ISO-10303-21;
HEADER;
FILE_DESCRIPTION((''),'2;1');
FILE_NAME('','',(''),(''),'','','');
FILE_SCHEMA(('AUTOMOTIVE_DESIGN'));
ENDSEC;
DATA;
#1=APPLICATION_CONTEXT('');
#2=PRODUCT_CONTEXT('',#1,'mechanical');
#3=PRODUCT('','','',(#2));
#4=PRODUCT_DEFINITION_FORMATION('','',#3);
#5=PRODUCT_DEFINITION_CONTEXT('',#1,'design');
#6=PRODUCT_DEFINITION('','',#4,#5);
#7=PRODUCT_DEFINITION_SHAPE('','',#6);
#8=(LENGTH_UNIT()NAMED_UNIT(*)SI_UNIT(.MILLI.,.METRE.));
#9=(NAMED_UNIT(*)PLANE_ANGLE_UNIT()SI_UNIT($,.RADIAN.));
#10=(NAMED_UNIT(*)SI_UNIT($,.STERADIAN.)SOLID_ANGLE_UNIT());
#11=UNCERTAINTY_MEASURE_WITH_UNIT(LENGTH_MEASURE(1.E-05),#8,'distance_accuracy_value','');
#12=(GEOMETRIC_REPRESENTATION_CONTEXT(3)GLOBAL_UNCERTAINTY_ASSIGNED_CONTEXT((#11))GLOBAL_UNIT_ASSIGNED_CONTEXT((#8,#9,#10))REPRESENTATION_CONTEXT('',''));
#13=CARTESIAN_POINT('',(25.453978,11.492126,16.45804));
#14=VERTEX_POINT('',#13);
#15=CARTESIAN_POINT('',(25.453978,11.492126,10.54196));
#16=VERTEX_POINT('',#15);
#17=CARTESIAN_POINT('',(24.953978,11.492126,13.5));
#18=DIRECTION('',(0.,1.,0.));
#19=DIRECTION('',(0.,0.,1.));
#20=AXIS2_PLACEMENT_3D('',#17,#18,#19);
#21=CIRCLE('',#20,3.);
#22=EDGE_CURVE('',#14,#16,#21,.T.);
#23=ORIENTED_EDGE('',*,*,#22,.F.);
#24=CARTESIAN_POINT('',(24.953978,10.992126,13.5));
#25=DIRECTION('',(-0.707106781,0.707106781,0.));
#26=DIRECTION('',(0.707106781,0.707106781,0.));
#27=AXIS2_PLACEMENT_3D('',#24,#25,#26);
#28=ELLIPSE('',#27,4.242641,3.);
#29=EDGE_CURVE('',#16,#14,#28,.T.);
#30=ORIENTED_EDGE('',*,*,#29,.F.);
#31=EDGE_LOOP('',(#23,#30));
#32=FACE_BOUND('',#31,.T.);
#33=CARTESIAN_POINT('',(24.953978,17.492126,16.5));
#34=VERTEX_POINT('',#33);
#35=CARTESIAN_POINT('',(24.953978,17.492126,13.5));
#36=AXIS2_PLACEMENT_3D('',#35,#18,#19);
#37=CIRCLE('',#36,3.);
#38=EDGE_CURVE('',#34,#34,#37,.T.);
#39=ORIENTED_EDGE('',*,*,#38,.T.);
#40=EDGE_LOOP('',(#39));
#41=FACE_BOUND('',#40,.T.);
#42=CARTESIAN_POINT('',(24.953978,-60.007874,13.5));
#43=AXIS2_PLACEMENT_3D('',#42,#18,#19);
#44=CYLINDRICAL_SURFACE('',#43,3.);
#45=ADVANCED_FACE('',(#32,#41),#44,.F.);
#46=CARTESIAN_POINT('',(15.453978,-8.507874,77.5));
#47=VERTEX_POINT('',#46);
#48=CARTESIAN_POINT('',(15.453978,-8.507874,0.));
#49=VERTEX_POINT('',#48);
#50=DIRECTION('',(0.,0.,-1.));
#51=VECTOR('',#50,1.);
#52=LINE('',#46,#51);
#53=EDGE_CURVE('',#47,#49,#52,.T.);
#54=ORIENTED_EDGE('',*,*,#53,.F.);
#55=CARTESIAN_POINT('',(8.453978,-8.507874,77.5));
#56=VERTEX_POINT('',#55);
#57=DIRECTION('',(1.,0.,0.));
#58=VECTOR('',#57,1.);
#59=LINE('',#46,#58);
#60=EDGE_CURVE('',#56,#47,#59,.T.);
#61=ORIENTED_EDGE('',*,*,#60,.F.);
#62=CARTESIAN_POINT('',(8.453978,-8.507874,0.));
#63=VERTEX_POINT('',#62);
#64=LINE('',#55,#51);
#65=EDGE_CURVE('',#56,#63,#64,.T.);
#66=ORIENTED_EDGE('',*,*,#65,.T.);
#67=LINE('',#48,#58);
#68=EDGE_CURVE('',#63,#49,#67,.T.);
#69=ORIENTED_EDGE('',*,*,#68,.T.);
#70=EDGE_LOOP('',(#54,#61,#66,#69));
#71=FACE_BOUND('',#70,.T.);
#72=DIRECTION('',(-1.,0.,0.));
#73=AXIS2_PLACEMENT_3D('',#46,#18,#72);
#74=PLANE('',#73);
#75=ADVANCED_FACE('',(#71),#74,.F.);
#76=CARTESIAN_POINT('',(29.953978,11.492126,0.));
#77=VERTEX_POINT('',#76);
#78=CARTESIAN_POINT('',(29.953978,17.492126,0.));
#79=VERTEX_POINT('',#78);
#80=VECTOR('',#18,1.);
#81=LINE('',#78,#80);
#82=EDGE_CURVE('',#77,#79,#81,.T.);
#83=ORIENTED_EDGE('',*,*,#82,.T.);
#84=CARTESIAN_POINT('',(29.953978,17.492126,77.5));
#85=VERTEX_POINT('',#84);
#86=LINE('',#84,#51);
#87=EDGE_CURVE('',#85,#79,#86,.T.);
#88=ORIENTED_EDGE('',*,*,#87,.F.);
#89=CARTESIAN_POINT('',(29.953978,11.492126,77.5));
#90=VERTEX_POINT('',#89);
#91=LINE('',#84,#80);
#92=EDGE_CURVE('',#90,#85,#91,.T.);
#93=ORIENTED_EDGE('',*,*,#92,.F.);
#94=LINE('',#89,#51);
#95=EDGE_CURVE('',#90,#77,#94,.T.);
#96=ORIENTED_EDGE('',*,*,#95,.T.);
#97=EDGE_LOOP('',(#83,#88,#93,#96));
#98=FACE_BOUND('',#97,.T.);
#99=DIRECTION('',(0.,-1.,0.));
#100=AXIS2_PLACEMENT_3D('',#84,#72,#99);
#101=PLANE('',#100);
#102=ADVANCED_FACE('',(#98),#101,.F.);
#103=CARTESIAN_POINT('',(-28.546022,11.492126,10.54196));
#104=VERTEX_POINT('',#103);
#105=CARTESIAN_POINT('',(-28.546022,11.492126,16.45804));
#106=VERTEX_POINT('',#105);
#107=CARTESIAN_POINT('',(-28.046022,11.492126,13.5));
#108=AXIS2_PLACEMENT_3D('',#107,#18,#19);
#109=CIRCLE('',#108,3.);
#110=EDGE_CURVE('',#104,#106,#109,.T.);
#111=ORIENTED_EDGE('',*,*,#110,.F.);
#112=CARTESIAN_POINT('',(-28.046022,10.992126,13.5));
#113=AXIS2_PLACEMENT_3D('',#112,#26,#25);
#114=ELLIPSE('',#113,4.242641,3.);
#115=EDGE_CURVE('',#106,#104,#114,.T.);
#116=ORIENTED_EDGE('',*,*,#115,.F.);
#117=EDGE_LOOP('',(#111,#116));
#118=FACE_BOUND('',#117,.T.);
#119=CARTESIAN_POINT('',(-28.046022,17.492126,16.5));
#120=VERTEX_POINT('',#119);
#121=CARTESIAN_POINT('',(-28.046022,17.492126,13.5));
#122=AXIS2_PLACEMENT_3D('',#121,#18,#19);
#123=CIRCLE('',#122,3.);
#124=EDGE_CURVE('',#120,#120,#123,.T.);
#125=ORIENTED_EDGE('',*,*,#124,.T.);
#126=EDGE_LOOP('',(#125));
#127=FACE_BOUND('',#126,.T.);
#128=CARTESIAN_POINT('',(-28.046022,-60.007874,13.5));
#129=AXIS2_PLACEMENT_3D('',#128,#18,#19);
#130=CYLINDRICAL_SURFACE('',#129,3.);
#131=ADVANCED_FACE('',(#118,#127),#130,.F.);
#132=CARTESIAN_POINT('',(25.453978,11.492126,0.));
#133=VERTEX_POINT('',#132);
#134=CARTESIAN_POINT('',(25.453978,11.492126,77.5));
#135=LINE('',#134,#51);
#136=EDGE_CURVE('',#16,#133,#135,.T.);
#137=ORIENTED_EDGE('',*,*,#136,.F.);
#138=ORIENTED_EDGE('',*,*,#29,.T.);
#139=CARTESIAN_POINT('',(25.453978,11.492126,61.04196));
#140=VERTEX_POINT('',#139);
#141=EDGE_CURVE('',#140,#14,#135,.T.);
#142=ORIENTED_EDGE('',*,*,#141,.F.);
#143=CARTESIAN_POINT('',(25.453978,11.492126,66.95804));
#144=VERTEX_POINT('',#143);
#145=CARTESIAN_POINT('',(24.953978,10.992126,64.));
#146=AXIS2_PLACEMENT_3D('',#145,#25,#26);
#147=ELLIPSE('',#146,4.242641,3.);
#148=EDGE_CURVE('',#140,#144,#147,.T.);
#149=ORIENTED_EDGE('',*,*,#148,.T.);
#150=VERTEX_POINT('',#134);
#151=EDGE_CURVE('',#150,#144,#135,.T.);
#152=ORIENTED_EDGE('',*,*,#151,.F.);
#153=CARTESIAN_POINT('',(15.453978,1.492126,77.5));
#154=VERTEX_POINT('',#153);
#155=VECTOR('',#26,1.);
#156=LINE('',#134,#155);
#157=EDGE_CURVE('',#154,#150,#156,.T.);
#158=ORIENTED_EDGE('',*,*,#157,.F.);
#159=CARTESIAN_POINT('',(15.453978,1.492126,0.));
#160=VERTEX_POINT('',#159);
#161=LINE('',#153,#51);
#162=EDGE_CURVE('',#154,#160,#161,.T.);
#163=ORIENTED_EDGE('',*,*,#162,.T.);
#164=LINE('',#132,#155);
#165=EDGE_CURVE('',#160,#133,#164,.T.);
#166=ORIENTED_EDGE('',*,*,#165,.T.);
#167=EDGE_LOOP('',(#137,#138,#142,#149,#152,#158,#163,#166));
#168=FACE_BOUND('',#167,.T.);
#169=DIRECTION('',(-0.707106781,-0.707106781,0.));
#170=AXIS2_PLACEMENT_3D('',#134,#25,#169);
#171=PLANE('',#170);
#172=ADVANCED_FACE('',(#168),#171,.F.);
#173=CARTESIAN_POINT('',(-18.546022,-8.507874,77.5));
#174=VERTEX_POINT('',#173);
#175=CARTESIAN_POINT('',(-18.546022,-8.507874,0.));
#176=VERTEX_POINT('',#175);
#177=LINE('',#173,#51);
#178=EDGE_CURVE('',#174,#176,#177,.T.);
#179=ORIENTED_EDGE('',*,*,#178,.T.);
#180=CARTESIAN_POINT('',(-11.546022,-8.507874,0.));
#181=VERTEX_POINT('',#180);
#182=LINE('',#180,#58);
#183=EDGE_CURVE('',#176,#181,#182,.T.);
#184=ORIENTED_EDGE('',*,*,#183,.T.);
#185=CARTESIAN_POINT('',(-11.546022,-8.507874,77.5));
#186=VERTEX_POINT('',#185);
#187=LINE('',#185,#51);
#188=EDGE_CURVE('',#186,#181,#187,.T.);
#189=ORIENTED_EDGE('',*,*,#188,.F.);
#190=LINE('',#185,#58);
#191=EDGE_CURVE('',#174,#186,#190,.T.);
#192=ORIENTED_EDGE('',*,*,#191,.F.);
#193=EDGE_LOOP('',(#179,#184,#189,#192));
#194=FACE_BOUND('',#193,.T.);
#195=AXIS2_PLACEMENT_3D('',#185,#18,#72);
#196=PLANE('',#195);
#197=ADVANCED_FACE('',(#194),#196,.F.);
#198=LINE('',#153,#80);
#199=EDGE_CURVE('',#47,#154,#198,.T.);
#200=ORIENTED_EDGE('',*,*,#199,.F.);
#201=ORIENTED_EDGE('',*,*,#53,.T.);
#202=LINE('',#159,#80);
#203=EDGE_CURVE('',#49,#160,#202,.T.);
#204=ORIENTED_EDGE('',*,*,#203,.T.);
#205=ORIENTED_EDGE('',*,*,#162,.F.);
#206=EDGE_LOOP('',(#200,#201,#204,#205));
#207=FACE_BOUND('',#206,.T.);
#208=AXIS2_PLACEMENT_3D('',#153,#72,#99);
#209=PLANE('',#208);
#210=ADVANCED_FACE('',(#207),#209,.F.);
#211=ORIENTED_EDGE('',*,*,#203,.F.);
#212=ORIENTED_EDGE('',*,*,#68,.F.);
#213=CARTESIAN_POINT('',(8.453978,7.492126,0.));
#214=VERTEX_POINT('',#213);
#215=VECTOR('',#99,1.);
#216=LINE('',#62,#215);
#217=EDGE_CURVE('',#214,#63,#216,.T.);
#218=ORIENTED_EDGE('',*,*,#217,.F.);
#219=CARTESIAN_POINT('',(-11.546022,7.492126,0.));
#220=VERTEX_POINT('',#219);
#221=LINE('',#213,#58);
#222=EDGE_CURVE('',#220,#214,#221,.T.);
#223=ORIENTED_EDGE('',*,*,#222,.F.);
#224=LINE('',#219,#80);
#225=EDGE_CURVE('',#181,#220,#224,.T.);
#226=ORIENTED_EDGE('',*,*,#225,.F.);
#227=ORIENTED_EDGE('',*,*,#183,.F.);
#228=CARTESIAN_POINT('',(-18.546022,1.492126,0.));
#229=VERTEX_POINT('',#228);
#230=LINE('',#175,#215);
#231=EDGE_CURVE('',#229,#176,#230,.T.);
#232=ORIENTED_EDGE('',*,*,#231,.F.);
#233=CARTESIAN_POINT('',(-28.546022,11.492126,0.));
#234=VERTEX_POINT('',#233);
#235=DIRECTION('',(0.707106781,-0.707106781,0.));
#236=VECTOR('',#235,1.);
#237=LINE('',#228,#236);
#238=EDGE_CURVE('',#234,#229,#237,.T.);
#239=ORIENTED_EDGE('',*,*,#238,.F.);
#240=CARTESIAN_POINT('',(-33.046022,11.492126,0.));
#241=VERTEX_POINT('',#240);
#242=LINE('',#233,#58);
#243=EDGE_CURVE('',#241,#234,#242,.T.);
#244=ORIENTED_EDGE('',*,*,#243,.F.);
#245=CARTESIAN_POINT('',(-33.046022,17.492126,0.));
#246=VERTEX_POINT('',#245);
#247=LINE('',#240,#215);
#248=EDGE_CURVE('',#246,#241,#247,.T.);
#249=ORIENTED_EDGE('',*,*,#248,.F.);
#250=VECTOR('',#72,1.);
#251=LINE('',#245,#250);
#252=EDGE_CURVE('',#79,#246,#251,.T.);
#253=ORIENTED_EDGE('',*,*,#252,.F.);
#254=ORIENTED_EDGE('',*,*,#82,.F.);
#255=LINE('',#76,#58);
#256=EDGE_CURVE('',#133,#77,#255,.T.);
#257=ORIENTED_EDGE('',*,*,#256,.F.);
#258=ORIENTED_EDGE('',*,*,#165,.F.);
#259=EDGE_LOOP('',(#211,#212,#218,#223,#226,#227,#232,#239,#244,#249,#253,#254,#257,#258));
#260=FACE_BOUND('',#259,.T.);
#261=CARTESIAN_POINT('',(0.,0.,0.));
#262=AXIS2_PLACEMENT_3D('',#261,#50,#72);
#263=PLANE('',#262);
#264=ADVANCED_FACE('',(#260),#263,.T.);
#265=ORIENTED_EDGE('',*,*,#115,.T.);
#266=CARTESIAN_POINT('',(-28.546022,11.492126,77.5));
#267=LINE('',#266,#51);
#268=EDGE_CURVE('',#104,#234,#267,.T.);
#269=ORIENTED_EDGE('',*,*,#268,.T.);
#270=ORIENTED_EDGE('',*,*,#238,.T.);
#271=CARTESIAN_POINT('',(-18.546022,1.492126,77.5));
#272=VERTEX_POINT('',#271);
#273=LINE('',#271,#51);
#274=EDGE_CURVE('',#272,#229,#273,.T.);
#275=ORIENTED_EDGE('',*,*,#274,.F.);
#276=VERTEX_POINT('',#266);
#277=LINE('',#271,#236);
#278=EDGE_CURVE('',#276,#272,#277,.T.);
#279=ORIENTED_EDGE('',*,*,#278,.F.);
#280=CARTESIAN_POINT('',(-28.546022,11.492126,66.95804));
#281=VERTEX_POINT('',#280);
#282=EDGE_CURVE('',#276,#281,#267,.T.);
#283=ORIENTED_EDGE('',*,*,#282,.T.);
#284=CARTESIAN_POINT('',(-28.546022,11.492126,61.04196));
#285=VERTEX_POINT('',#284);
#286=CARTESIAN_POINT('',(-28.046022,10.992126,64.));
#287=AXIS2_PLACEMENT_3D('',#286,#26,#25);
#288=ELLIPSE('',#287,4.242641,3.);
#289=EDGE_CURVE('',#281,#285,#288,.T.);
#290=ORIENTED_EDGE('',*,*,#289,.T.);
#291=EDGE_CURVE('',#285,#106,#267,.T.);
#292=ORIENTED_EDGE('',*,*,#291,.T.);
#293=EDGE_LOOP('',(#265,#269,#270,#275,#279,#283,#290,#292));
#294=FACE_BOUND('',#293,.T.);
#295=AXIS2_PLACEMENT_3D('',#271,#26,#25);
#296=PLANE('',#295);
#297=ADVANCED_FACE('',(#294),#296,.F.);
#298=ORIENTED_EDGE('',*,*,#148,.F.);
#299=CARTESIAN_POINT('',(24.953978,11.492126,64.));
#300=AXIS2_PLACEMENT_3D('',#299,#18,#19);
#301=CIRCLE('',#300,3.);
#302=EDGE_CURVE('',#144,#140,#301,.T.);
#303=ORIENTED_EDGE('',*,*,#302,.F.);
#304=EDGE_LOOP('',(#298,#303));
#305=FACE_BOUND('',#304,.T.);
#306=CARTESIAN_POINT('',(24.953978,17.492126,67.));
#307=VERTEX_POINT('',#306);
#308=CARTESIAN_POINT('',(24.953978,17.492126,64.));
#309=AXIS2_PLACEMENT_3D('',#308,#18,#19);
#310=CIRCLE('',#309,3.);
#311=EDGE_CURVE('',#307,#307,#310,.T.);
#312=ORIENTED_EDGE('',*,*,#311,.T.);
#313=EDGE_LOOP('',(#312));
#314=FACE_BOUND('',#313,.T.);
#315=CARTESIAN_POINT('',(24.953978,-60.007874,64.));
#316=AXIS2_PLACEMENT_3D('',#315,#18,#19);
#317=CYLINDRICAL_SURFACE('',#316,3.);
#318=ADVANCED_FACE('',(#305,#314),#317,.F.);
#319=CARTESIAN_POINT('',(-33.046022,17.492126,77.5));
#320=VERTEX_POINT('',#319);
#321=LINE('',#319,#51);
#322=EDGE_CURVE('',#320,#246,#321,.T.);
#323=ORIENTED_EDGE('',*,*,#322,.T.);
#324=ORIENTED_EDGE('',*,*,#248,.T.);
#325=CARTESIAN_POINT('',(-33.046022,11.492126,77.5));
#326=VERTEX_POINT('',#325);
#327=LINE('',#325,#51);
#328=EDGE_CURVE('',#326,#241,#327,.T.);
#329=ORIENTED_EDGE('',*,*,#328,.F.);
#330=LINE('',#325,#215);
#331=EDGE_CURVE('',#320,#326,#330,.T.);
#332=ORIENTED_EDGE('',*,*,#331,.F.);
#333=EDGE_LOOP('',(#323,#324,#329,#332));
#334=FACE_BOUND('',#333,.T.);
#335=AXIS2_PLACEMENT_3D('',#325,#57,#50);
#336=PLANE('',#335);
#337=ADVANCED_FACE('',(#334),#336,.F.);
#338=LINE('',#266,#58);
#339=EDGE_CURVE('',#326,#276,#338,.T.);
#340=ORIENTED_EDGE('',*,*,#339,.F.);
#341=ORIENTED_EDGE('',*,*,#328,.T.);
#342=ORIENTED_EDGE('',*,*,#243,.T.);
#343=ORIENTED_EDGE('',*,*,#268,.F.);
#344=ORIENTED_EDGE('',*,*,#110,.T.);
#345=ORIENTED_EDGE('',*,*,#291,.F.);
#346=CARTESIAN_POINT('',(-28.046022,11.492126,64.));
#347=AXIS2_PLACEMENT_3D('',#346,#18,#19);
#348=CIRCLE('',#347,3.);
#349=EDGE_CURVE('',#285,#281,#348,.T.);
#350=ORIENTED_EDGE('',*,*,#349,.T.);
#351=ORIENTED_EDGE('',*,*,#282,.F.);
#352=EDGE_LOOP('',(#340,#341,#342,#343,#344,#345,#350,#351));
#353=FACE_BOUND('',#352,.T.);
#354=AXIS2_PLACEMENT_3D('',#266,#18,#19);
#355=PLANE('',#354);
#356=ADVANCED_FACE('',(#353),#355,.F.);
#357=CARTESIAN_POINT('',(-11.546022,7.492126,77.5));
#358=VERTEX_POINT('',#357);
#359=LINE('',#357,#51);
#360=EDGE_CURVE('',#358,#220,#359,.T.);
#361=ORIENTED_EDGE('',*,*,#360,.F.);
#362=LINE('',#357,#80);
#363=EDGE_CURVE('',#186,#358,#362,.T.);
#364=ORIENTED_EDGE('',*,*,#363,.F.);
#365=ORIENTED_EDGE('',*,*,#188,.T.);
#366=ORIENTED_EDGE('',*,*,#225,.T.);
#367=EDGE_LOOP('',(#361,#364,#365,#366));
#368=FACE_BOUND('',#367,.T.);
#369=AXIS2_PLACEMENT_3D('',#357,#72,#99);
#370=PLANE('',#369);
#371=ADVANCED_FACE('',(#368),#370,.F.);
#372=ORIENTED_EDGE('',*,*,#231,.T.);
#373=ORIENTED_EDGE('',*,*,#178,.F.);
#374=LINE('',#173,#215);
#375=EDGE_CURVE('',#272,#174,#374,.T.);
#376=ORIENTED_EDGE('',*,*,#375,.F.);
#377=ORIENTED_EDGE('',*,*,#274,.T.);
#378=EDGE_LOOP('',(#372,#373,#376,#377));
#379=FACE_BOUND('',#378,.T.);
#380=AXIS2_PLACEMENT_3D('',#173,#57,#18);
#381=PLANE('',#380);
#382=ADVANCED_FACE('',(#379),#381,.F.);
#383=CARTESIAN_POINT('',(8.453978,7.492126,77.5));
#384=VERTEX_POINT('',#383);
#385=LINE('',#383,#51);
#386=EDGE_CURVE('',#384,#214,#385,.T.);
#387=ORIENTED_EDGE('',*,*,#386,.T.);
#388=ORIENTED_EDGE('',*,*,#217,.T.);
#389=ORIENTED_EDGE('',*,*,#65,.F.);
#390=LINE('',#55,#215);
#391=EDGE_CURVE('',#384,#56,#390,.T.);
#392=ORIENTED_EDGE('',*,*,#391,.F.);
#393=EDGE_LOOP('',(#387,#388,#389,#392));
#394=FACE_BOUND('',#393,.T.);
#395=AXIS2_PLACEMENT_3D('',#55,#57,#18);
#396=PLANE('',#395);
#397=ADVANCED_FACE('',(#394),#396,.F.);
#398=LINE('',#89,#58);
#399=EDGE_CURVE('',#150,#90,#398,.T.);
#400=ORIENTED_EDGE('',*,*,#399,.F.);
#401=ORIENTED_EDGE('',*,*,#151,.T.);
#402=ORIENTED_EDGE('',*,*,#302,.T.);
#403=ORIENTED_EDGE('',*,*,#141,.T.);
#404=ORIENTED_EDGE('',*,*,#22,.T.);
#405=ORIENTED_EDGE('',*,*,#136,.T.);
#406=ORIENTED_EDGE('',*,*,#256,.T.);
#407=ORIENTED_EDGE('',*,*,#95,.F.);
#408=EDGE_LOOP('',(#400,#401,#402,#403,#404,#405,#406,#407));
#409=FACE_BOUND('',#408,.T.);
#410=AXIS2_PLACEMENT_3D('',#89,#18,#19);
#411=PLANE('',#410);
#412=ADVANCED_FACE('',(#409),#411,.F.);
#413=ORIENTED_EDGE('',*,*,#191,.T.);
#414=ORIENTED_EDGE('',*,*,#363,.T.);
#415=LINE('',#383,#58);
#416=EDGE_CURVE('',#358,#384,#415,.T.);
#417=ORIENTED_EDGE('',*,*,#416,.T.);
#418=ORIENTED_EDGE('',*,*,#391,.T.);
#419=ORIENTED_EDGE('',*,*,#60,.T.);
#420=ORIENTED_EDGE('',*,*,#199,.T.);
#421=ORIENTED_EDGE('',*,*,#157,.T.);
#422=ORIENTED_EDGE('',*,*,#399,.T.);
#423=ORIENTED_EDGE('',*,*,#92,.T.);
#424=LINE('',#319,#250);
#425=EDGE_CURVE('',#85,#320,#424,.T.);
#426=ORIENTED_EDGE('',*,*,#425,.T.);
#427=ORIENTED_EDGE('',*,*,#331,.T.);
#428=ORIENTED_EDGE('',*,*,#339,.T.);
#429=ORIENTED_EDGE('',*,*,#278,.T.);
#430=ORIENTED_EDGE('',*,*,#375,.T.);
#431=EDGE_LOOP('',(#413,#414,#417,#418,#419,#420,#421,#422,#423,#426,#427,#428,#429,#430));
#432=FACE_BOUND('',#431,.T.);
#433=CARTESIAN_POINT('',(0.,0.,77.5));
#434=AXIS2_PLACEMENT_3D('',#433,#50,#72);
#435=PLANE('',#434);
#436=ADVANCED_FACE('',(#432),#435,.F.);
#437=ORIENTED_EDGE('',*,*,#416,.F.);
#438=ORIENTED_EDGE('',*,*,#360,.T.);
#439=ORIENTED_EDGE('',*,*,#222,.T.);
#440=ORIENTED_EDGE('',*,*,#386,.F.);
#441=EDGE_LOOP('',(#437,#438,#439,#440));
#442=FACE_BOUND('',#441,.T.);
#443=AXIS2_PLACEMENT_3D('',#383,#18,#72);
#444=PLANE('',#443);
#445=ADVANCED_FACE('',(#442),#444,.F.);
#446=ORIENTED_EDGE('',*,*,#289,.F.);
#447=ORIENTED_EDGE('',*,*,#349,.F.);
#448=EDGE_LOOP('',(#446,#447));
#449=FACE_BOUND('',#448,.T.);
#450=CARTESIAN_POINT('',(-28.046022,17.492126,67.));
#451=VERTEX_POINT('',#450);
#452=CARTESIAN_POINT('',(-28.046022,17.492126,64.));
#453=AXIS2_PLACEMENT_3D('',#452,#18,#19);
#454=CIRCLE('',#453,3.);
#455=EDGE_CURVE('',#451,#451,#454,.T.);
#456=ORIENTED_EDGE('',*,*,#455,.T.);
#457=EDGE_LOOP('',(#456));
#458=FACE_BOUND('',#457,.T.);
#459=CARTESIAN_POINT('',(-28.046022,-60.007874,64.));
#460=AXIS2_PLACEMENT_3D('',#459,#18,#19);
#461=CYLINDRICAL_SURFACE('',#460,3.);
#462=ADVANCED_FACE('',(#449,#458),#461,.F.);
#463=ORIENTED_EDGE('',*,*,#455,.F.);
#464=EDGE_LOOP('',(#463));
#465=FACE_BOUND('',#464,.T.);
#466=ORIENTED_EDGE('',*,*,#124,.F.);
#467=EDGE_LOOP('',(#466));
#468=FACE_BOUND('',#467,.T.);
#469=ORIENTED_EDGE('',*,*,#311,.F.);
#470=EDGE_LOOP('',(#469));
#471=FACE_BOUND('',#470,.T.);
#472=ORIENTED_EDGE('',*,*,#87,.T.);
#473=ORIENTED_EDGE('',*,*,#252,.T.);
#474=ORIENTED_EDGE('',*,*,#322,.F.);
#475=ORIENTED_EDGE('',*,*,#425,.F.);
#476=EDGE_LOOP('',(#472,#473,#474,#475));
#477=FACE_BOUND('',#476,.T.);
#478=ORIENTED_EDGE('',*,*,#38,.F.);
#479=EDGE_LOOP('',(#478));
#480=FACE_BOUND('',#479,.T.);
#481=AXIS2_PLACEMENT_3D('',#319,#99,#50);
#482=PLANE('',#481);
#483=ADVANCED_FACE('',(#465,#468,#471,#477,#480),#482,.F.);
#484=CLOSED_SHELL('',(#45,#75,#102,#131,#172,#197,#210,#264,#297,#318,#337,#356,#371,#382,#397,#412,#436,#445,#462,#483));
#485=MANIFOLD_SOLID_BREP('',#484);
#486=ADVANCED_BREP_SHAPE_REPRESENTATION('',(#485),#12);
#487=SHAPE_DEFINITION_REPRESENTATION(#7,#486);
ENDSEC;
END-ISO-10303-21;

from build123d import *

# Parameters (mm, degrees)
Y_KSEKLIK_EKSTR_ZYON1_DEPTH = 77.5
KES_EKSTR_ZYON1_START       = 7.992125884
KES_EKSTR_ZYON1_OUTLINE_R   = 3
KES_EKSTR_ZYON1_DEPTH       = 9.5000001


# Read off the part's stored shape, not the designer's step: Kes-Ekstrüzyon1
with BuildPart() as part:
    # Çizim1 → Yükseklik-Ekstrüzyon1 (new body)
    with BuildSketch(Plane.XY):
        Polygon((-33.046021585, 17.492125984), (29.953978415, 17.492125984), (29.953978415, 11.492125984), (25.453978415, 11.492125984), (15.453978415, 1.492125984), (15.453978415, -8.507874016), (8.453978415, -8.507874016), (8.453978415, 7.492125984), (-11.546021585, 7.492125984), (-11.546021585, -8.507874016), (-18.546021585, -8.507874016), (-18.546021585, 1.492125984), (-28.546021585, 11.492125984), (-33.046021585, 11.492125984), align=None)
    extrude(amount=Y_KSEKLIK_EKSTR_ZYON1_DEPTH)

    # Kes-Ekstrüzyon1 outline → Kes-Ekstrüzyon1 (cut)
    with BuildSketch(Plane(origin=(0, 0, 0), x_dir=(1, 0, 0), z_dir=(0, 1, 0)).offset(KES_EKSTR_ZYON1_START)):
        with Locations((-28.046021585, -13.5)):
            Circle(KES_EKSTR_ZYON1_OUTLINE_R)
        with Locations((24.953978415, -64)):
            Circle(KES_EKSTR_ZYON1_OUTLINE_R)
        with Locations((-28.046021585, -64)):
            Circle(KES_EKSTR_ZYON1_OUTLINE_R)
        with Locations((24.953978415, -13.5)):
            Circle(KES_EKSTR_ZYON1_OUTLINE_R)
    extrude(amount=KES_EKSTR_ZYON1_DEPTH, mode=Mode.SUBTRACT)


solid = part.part
